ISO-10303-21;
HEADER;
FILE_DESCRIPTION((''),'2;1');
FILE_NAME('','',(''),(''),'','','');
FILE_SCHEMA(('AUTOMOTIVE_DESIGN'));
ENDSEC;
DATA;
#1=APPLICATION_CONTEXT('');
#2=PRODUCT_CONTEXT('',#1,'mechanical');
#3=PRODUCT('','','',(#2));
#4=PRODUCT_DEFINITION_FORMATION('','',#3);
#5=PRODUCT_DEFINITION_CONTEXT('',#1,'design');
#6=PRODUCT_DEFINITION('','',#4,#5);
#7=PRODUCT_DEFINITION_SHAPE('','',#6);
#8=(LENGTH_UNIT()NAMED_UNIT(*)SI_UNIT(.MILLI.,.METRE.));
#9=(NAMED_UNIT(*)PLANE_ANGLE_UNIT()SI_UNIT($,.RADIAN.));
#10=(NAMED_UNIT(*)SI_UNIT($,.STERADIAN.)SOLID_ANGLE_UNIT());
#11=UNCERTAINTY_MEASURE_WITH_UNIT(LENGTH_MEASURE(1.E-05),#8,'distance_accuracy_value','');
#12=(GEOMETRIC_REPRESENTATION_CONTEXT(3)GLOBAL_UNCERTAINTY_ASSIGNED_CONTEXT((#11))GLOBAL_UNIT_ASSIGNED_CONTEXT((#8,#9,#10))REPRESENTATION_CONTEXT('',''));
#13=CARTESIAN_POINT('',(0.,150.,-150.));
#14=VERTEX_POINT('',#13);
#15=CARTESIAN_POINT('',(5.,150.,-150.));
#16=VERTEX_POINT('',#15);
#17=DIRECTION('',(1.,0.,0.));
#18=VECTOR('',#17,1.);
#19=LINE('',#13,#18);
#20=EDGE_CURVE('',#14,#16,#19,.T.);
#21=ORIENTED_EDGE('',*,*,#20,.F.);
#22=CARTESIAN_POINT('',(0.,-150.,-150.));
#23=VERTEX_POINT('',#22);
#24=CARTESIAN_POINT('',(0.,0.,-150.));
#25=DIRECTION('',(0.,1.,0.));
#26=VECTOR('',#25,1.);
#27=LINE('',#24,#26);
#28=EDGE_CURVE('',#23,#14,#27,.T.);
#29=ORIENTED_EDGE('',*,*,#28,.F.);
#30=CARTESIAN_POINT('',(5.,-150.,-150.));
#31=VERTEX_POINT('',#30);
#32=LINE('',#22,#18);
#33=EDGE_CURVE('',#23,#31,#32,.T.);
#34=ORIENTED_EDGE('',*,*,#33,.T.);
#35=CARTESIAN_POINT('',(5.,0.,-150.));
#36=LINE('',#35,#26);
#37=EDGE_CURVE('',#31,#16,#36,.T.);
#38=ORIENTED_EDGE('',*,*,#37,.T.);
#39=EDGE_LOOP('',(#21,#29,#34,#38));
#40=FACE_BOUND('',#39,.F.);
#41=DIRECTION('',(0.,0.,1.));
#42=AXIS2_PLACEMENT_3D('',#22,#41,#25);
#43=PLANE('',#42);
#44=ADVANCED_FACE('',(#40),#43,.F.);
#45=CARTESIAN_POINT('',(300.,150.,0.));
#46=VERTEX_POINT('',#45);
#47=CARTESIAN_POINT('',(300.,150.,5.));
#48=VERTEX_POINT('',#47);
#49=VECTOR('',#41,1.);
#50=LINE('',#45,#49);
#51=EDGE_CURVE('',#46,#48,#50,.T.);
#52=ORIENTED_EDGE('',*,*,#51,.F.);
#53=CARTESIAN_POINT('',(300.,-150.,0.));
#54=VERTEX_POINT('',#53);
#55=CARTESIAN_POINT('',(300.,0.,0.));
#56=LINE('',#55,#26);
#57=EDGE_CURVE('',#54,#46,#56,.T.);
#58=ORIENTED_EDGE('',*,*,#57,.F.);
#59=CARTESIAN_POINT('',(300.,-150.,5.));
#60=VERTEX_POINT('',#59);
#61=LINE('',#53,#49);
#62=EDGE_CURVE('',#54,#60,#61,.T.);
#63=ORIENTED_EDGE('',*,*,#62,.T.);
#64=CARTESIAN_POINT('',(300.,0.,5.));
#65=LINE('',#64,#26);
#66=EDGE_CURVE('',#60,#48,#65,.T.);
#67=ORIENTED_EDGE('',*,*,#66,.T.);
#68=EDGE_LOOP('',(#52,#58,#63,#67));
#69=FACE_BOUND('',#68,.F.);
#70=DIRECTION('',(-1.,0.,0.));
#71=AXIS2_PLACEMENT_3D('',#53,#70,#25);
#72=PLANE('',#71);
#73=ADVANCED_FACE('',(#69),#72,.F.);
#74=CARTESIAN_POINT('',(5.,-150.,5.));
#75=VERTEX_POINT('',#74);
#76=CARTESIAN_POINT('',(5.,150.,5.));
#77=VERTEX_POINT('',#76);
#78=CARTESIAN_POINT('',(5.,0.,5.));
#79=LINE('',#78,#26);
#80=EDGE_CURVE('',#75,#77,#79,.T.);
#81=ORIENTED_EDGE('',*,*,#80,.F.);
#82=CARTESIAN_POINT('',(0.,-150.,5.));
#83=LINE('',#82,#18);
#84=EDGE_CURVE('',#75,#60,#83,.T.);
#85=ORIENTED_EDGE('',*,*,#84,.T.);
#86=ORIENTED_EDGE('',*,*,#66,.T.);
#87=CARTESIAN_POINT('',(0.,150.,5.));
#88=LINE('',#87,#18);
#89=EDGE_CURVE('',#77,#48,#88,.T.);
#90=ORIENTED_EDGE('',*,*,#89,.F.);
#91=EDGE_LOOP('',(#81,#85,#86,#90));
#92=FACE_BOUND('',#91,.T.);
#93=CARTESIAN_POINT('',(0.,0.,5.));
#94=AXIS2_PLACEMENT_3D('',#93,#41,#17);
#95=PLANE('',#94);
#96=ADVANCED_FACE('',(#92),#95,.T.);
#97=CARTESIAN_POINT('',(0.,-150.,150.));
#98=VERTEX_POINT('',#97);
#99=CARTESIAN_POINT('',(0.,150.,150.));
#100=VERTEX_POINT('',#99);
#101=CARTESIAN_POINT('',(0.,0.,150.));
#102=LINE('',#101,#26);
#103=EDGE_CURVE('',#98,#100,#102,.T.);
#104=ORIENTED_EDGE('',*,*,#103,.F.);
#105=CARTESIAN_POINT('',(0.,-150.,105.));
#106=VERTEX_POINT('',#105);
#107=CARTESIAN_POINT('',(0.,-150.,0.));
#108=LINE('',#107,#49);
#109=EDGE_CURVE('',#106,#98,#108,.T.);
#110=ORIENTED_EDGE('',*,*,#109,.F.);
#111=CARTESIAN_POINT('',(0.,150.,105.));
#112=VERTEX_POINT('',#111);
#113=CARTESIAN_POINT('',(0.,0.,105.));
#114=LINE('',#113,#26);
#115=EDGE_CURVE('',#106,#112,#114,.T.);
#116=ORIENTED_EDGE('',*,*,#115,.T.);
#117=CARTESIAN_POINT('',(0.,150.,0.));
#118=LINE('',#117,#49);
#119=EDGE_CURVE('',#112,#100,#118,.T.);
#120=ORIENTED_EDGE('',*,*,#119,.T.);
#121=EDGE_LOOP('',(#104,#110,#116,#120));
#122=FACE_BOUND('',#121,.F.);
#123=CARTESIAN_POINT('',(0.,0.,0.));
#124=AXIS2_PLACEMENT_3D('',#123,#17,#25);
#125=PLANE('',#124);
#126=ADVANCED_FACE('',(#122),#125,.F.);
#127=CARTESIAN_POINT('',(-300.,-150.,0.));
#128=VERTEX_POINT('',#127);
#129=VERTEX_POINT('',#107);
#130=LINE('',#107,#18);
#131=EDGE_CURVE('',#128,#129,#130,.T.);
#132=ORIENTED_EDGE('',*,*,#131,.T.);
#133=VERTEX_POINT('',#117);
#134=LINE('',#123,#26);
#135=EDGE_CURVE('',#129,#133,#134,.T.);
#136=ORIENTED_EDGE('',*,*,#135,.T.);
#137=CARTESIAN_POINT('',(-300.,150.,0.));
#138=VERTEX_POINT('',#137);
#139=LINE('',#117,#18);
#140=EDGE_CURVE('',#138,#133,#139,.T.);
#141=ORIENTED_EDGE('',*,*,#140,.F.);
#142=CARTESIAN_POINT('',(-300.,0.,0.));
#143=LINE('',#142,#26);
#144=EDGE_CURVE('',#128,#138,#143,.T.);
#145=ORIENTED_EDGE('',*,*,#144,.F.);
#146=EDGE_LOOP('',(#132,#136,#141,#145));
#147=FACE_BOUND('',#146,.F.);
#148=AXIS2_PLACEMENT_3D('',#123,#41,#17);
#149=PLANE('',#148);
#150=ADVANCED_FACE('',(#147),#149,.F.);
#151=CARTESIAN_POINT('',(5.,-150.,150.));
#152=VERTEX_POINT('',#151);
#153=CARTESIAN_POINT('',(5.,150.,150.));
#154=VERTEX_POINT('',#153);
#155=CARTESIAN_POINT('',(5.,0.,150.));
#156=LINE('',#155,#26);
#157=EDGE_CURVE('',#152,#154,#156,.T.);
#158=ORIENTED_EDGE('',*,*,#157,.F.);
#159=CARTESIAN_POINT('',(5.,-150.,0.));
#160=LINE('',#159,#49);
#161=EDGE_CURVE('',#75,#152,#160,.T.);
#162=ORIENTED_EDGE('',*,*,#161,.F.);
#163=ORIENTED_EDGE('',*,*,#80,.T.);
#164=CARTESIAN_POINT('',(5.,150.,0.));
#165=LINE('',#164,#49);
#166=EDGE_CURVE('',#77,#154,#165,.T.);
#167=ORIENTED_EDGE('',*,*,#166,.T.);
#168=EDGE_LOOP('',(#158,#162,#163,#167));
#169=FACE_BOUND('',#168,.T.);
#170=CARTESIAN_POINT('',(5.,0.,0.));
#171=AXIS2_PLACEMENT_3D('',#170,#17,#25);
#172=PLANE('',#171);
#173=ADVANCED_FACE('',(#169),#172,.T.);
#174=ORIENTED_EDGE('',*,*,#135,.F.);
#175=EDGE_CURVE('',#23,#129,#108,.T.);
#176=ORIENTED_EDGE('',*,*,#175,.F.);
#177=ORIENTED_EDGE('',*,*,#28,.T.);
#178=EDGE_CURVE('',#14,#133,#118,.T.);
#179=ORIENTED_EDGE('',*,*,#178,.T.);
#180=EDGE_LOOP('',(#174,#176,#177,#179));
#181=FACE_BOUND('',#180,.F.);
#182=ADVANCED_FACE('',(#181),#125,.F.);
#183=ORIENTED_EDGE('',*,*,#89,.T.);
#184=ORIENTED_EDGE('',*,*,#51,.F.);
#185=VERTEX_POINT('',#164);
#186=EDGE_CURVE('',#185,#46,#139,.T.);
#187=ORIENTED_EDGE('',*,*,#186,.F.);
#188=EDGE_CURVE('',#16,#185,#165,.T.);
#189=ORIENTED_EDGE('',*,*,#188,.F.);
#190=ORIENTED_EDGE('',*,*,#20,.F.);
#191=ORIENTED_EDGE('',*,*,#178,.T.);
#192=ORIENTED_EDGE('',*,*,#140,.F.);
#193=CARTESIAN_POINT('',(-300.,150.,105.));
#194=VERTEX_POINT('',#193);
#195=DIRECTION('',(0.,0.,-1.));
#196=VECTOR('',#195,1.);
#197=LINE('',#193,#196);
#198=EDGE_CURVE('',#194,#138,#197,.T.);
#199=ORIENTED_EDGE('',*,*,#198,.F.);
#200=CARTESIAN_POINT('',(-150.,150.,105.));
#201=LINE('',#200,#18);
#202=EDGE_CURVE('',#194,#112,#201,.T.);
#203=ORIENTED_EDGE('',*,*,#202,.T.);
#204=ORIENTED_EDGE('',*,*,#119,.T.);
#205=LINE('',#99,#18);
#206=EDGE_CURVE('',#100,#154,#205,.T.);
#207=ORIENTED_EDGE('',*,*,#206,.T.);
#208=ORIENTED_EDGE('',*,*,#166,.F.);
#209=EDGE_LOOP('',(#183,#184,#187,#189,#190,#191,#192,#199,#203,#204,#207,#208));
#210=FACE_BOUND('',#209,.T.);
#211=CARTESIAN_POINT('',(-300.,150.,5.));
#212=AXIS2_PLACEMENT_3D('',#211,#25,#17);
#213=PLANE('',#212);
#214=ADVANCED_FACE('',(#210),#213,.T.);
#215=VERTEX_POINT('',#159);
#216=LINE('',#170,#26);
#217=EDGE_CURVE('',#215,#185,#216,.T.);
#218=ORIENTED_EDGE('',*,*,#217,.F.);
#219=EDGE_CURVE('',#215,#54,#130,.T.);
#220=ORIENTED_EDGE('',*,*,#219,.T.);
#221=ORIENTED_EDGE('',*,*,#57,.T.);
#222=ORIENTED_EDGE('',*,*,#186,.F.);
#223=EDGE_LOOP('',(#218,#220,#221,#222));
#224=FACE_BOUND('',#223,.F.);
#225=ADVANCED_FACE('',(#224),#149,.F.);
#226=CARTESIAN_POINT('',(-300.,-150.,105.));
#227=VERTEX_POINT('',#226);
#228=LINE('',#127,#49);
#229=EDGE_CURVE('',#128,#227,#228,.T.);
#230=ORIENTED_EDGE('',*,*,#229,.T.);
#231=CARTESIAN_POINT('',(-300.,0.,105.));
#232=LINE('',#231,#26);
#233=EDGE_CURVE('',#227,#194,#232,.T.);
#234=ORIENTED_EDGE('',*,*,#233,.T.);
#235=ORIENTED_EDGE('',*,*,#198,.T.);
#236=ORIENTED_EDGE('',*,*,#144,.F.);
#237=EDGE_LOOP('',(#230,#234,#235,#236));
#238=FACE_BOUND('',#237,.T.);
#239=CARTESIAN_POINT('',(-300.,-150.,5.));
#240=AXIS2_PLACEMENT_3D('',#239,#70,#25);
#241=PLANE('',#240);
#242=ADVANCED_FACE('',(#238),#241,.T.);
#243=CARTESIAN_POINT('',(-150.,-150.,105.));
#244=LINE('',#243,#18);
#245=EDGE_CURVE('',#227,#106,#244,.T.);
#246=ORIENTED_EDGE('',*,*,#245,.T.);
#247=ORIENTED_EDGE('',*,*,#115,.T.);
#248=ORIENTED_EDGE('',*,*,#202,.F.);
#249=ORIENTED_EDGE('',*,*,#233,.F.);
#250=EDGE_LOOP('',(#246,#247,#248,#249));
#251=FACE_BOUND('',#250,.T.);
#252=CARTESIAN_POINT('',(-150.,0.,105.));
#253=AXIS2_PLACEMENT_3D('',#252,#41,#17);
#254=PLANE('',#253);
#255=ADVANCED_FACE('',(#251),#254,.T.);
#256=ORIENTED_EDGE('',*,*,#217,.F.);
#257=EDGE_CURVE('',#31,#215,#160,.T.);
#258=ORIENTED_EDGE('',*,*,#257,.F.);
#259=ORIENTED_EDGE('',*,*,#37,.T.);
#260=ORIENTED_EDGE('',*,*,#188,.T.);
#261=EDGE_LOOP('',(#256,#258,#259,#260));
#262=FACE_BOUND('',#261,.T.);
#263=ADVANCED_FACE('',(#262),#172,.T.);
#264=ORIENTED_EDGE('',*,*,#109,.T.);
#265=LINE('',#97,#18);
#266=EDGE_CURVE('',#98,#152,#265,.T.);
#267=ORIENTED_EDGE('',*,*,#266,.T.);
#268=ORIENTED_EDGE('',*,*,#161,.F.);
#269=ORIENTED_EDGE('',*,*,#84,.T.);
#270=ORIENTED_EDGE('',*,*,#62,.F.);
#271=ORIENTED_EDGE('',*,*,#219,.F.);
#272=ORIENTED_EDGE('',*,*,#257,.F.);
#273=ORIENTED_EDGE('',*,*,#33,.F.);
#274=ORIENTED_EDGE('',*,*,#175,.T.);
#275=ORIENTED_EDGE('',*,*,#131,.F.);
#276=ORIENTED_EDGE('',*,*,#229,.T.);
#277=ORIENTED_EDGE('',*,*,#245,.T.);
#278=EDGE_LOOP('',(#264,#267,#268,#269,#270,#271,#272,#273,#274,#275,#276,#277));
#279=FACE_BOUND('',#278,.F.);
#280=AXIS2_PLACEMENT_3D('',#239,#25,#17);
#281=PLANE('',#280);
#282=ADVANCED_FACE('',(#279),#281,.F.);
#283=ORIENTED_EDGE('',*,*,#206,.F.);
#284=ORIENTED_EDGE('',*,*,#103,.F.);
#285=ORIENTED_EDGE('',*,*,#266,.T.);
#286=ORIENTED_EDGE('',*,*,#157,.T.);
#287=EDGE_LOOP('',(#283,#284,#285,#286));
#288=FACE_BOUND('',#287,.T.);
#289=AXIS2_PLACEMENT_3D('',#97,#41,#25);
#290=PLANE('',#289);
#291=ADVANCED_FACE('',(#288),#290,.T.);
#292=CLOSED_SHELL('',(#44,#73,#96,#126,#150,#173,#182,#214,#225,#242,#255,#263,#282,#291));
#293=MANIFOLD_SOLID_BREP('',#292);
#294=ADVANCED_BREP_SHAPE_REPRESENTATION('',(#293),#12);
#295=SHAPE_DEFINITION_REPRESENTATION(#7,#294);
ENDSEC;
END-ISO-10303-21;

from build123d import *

# Parameters (mm, degrees)
F0_W     = 600
F0_H     = 300
F1_DEPTH = 5
F2_W     = 300
F2_H     = 300
F3_DEPTH = 5
F6_W     = 300
F6_H     = 300
F7_DEPTH = 100


# Not quite as in the source:
# - the program builds the solid bodies; features that only make, move or delete a surface that nothing else refers to are left out


with BuildPart() as f1:
    # F0 (on Top) → F1 (new body)
    with BuildSketch(Plane.XY):
        Rectangle(F0_W, F0_H)
    extrude(amount=F1_DEPTH)

    # F2 (on Right) → F3 (join)
    with BuildSketch(Plane.YZ):
        Rectangle(F2_W, F2_H)
    extrude(amount=F3_DEPTH)

    # F6 (on face) → F7 (join)
    with BuildSketch(Plane.XY.offset(5)):
        with Locations((-150, 0)):
            Rectangle(F6_W, F6_H)
    extrude(amount=F7_DEPTH)


solid = f1.part
